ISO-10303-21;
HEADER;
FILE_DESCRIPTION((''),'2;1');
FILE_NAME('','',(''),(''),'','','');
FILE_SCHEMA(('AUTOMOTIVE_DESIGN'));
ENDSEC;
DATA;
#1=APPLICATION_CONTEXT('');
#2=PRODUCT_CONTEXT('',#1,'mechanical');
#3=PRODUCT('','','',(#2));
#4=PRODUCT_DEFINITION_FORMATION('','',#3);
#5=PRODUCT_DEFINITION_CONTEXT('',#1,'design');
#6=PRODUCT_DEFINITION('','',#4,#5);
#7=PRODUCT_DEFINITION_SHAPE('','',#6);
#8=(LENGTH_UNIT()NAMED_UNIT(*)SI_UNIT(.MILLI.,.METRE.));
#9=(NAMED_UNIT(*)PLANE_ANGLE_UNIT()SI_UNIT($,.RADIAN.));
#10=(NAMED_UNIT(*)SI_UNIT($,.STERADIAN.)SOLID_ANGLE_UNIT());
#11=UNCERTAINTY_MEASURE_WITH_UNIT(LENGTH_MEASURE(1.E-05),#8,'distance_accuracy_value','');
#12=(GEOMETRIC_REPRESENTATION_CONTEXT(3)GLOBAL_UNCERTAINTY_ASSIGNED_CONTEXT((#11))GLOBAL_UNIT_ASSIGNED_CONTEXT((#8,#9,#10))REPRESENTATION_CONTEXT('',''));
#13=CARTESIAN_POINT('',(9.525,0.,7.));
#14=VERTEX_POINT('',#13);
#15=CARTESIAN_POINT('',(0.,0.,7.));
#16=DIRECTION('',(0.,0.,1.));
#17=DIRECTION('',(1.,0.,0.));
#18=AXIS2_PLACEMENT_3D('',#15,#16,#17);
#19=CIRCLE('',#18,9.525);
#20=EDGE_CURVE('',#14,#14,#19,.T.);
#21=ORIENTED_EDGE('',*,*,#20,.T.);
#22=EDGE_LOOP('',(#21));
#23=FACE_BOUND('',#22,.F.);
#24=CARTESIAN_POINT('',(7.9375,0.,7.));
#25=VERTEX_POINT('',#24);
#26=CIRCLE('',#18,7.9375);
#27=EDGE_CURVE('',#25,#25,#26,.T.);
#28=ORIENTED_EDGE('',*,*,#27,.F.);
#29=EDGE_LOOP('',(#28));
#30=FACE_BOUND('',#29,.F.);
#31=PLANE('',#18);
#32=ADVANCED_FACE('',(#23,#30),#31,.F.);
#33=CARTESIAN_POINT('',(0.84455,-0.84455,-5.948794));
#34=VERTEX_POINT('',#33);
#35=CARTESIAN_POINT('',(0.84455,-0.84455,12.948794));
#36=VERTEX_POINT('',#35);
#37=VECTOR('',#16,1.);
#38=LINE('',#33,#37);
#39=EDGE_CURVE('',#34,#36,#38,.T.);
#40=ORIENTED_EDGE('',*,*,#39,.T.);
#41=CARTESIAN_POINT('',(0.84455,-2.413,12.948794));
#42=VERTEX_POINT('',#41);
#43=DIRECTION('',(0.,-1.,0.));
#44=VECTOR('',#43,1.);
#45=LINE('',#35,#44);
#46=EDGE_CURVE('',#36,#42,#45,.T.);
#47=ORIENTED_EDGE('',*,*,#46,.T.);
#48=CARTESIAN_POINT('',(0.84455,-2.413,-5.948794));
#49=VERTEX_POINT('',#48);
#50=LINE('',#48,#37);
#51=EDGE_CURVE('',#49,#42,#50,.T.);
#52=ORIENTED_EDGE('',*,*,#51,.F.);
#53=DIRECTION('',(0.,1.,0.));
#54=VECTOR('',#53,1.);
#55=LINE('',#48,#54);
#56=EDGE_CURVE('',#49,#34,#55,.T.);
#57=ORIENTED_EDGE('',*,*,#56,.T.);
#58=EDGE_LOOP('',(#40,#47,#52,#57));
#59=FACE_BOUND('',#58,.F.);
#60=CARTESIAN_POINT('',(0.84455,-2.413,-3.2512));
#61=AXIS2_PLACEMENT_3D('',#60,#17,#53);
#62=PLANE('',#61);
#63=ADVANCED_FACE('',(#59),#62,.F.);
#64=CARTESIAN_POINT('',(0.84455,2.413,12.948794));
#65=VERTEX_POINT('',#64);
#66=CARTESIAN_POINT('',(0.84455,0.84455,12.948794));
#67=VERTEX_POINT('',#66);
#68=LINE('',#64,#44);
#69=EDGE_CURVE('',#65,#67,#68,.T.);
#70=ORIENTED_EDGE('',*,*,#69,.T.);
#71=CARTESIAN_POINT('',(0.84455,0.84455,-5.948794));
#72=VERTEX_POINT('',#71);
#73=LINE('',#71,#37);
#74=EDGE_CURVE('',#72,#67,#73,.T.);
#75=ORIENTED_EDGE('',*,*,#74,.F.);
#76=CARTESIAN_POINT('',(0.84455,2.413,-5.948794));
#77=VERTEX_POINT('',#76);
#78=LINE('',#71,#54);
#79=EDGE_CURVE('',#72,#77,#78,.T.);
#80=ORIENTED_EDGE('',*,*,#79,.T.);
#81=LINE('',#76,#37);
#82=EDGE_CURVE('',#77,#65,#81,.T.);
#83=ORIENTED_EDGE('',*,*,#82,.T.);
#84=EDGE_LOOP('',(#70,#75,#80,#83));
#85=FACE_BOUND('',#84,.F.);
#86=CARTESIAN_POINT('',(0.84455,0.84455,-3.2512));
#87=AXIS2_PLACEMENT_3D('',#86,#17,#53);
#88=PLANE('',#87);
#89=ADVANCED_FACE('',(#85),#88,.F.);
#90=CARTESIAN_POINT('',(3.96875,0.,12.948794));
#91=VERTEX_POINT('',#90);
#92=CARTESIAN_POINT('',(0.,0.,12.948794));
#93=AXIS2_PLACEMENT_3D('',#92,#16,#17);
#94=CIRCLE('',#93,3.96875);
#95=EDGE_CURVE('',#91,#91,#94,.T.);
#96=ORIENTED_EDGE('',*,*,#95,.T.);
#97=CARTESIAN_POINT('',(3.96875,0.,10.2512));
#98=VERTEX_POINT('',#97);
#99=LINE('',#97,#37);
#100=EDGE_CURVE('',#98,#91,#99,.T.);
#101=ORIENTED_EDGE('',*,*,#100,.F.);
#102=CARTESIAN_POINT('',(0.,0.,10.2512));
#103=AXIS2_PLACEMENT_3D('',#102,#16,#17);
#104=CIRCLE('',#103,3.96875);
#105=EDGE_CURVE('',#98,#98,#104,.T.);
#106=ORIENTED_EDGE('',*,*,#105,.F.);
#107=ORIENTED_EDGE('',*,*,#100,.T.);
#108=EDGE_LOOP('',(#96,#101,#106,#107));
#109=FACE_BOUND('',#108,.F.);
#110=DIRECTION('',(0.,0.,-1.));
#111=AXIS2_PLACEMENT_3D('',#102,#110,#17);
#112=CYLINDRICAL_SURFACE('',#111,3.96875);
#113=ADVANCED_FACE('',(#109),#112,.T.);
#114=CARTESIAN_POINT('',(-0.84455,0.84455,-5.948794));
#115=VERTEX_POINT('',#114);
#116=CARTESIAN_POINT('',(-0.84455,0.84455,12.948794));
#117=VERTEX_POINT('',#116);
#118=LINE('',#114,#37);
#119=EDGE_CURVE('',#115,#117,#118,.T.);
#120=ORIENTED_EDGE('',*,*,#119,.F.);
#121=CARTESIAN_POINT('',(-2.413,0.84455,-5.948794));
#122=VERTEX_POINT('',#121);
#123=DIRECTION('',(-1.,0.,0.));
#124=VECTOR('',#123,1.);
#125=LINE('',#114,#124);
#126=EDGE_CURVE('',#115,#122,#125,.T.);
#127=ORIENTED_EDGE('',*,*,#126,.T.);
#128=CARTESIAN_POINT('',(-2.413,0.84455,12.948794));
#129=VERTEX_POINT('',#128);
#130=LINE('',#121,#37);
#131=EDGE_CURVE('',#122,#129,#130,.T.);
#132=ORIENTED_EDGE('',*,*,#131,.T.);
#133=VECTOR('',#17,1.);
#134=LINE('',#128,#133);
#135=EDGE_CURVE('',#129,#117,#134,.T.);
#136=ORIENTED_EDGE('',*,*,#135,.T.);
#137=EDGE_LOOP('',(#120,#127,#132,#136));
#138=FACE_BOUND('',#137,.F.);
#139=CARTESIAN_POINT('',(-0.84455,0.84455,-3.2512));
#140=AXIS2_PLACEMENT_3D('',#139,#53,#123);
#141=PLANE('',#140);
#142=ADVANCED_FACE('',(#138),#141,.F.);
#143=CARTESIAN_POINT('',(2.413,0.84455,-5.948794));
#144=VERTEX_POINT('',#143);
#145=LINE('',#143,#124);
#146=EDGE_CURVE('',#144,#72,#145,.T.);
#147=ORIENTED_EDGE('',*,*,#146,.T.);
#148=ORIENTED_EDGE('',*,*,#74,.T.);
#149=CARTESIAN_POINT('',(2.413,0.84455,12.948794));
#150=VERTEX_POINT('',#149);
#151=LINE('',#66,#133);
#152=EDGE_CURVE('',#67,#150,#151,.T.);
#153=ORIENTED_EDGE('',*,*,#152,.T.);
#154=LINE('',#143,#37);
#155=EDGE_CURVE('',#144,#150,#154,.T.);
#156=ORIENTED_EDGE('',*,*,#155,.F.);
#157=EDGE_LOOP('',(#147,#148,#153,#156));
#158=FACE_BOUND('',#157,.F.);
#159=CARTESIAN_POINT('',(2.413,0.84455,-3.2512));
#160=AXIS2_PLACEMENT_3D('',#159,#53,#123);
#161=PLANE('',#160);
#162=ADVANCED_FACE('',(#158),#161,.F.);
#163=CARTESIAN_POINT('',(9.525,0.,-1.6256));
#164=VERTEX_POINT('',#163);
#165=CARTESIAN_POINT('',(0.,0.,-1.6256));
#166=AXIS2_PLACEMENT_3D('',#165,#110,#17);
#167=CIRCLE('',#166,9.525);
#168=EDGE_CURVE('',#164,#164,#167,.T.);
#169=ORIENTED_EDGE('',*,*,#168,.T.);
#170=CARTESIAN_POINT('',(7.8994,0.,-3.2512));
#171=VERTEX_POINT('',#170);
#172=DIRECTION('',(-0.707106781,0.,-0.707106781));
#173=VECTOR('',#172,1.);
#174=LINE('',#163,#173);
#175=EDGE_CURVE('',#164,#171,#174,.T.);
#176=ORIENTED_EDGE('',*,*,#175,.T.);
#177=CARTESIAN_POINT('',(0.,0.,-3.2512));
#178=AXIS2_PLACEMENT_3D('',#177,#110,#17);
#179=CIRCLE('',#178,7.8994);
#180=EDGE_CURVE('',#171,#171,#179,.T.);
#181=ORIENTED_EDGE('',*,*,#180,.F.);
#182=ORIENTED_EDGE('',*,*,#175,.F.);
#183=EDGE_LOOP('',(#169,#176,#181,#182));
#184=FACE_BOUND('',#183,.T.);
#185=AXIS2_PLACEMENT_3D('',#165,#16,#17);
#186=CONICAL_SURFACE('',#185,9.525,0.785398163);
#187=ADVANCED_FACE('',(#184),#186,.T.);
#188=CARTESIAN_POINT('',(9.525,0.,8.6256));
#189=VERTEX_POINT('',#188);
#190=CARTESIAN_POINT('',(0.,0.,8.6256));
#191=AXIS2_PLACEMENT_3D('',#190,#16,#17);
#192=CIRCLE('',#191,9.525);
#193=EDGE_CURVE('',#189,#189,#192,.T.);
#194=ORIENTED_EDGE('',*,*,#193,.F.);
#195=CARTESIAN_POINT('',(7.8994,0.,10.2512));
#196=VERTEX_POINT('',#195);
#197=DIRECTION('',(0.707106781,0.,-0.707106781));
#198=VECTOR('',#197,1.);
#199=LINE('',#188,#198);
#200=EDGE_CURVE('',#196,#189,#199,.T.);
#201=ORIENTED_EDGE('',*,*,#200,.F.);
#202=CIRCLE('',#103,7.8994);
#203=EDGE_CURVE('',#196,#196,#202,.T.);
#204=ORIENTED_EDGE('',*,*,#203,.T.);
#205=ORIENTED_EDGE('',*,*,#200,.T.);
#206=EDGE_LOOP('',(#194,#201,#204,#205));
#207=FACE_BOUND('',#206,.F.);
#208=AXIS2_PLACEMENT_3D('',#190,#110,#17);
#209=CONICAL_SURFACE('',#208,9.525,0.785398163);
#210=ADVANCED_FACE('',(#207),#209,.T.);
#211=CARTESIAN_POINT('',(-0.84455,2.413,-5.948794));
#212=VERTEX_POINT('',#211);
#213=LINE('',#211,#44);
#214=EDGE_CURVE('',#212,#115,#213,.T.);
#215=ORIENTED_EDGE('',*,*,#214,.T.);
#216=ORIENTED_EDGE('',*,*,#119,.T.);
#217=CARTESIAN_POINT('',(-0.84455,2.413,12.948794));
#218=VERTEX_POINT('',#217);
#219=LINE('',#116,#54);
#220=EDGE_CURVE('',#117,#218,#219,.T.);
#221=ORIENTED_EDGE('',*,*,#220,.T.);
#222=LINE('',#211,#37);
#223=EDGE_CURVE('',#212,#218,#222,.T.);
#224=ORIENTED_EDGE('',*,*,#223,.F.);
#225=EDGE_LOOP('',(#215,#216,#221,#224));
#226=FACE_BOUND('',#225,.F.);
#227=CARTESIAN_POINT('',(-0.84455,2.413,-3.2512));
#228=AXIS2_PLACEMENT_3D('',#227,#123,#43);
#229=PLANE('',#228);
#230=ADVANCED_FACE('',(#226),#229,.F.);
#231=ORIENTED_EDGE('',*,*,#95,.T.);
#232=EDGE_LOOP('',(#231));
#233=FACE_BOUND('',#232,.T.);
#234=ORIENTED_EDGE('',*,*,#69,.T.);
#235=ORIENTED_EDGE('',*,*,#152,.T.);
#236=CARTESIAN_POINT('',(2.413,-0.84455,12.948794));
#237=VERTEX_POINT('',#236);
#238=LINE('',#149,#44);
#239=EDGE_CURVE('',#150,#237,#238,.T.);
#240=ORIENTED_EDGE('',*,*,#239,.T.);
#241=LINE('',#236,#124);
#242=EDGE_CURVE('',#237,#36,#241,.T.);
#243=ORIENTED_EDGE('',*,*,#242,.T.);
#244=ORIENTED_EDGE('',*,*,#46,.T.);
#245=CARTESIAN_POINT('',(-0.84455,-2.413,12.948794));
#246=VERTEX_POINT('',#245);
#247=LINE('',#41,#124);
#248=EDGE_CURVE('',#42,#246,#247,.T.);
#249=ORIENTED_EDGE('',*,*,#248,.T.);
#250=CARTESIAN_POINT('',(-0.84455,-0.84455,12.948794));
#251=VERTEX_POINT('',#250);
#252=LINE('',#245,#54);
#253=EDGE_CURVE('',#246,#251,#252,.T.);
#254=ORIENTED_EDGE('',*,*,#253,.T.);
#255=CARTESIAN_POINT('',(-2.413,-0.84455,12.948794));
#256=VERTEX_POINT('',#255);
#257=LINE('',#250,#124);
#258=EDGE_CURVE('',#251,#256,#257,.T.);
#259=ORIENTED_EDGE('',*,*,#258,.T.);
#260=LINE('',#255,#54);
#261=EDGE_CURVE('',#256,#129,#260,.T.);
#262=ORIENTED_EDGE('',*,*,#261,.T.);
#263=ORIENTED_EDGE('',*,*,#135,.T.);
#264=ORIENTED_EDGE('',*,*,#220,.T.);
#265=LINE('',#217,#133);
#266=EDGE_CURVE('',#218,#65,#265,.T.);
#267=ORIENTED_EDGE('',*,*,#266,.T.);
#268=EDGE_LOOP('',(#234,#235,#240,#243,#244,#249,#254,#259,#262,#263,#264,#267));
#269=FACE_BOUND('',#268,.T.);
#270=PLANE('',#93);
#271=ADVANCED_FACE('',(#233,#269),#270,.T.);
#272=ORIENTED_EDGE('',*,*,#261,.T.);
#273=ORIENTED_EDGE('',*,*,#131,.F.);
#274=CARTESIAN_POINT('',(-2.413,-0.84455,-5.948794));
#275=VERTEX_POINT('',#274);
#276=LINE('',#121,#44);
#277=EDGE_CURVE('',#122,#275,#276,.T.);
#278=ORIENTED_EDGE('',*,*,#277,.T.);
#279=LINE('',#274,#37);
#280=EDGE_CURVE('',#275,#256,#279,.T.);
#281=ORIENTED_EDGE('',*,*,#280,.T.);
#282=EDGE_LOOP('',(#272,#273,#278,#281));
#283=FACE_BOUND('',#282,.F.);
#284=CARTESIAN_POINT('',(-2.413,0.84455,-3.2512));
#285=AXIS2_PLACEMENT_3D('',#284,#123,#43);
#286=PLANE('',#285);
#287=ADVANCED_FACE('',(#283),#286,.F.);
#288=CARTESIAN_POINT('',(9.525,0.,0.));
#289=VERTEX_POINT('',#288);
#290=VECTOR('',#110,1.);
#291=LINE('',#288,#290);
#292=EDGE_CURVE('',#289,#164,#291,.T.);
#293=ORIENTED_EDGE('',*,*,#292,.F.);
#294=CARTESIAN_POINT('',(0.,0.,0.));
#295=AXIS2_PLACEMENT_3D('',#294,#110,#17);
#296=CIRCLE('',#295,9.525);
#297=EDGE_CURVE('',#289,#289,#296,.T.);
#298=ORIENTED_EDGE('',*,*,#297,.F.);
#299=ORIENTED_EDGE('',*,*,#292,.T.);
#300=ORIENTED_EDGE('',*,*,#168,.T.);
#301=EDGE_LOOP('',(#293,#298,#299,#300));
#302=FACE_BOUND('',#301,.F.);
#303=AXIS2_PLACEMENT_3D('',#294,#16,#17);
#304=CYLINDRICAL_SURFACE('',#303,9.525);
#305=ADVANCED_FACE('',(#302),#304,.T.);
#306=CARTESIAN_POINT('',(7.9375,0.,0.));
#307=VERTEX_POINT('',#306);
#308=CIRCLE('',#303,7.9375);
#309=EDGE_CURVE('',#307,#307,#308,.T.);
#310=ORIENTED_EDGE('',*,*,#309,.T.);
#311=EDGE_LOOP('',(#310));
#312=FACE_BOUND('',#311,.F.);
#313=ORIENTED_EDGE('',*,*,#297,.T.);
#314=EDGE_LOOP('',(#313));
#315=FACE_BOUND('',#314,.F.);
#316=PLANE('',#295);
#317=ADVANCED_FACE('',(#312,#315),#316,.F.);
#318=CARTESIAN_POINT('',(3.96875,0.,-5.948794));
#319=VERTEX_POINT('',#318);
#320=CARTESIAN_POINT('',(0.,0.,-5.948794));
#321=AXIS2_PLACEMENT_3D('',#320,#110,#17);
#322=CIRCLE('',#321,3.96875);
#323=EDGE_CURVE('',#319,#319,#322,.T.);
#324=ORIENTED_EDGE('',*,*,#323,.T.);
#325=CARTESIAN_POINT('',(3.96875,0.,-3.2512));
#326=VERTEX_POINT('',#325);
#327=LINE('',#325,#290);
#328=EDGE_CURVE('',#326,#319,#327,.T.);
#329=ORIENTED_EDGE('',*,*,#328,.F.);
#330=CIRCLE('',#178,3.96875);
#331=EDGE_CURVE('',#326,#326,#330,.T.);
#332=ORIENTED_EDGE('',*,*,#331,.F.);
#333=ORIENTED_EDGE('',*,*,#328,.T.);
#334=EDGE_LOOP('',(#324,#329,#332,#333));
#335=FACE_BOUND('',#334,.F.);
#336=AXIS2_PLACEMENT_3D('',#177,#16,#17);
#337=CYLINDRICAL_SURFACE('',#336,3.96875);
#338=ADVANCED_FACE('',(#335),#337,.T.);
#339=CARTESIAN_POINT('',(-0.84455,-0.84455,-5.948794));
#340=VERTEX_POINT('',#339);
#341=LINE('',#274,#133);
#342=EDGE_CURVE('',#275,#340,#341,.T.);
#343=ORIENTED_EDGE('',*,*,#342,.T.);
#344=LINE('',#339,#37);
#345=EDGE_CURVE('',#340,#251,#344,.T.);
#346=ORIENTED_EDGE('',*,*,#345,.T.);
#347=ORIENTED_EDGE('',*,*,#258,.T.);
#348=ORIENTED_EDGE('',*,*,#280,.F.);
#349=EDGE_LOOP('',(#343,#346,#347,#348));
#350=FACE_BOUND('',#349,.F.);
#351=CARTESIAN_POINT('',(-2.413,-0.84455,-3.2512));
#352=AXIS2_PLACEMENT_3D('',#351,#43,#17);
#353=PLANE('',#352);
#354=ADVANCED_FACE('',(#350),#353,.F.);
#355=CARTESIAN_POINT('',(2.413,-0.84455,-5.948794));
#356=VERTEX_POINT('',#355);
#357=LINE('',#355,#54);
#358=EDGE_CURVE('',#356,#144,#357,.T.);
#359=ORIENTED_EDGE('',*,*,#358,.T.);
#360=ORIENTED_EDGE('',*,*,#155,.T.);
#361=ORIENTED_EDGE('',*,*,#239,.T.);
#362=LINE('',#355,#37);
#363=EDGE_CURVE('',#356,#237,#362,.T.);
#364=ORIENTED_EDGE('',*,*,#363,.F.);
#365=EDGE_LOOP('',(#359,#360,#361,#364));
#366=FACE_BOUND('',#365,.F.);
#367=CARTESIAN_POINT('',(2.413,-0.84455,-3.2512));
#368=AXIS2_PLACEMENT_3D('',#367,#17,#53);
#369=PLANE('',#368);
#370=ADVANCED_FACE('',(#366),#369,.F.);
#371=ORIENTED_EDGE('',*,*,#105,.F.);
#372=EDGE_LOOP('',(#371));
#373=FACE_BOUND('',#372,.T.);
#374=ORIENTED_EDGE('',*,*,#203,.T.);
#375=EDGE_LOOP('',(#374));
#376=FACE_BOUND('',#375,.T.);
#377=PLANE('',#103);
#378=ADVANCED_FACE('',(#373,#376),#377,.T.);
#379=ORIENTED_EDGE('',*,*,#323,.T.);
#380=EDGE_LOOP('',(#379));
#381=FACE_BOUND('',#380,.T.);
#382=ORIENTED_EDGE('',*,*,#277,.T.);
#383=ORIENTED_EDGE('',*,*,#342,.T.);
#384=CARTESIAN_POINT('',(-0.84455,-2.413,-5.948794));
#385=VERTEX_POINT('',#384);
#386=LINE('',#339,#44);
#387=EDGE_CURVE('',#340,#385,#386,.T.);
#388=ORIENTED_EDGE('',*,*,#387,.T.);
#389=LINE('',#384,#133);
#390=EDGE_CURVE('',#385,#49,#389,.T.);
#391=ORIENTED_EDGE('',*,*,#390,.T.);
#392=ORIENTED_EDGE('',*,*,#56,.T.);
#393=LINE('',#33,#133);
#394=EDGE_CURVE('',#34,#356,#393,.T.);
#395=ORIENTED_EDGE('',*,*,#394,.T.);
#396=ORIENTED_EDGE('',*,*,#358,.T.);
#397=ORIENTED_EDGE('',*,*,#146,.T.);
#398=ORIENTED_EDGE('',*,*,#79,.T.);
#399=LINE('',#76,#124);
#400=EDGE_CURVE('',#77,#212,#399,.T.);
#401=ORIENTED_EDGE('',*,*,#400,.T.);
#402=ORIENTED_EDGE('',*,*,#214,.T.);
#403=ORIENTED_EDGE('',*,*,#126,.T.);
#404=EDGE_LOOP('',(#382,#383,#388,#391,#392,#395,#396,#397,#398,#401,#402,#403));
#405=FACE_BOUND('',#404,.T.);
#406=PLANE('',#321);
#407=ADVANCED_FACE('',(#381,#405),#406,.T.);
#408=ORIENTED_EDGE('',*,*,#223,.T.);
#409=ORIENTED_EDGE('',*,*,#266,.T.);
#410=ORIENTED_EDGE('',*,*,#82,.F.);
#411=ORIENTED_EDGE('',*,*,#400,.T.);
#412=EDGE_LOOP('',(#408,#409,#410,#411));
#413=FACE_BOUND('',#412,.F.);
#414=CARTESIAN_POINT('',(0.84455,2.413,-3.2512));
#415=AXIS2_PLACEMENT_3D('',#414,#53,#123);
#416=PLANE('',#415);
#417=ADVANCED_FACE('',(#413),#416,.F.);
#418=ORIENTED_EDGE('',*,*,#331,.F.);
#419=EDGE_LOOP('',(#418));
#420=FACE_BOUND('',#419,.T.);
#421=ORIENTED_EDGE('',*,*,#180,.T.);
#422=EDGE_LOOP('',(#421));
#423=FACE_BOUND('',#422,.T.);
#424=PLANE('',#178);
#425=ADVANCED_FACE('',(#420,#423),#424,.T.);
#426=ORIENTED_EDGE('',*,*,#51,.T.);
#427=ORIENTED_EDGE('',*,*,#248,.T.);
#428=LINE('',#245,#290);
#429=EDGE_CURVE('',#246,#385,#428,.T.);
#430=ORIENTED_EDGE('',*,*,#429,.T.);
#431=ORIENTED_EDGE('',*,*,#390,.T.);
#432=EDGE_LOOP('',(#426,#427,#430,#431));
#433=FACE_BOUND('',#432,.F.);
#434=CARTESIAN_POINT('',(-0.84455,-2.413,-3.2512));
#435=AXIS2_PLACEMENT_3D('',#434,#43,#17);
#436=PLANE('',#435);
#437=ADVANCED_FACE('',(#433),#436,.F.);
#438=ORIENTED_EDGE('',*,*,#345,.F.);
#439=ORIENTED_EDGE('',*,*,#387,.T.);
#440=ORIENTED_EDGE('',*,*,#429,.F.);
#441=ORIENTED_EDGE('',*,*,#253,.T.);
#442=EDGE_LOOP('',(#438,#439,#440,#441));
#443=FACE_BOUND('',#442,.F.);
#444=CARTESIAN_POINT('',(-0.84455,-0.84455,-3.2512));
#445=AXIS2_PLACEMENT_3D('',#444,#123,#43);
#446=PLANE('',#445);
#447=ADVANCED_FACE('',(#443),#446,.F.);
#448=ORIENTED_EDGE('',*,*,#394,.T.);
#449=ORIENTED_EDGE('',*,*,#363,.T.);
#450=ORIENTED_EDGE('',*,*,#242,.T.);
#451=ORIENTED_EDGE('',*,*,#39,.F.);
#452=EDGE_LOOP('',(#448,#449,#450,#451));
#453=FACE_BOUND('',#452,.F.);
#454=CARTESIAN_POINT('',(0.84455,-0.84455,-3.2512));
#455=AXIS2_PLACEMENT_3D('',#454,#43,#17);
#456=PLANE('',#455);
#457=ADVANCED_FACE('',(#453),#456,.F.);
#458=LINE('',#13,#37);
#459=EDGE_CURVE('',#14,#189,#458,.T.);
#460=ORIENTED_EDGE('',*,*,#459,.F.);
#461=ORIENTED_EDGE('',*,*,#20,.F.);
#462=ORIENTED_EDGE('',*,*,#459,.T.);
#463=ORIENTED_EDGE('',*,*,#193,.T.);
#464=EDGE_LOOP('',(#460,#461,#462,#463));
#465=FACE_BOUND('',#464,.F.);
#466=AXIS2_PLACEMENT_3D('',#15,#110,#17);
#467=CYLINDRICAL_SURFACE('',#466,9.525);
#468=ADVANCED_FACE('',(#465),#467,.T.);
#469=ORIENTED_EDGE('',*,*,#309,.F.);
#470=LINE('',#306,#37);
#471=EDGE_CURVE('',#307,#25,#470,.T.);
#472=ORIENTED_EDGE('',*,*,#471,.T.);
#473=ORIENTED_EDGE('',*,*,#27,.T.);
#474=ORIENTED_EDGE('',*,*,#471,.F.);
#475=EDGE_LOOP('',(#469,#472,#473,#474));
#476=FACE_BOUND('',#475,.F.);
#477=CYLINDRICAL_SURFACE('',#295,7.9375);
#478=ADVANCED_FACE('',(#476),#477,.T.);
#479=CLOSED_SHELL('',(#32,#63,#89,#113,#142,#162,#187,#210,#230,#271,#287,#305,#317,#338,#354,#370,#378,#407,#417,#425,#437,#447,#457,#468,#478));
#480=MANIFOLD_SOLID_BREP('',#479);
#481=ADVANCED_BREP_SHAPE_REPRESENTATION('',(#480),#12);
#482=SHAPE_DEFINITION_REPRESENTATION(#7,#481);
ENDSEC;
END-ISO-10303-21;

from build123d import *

# Parameters (mm, degrees)
F0_R      = 7.9375
F1_DEPTH  = 7
F2_R      = 9.525
F2_R_2    = 7.9375
F3_DEPTH  = 3.2512
F4_R      = 9.525
F4_R_2    = 7.9375
F5_DEPTH  = 3.2512
F6_SIZE   = 1.6256
F7_R      = 3.96875
F8_DEPTH  = 2.6975943
F9_R      = 3.96875
F10_DEPTH = 2.6975943


with BuildPart() as f1:
    # F0 (on Top) → F1 (new body)
    with BuildSketch(Plane.XY):
        Circle(F0_R)
        Polygon((0.84455, 0.84455), (2.413, 0.84455), (2.413, -0.84455), (0.84455, -0.84455), (0.84455, -2.413), (-0.84455, -2.413), (-0.84455, -0.84455), (-2.413, -0.84455), (-2.413, 0.84455), (-0.84455, 0.84455), (-0.84455, 2.413), (0.84455, 2.413), align=None, mode=Mode.SUBTRACT)
    extrude(amount=F1_DEPTH)

    # F2 (on face) → F3 (join)
    with BuildSketch(Plane.XY.offset(7)):
        Circle(F2_R)
        Circle(F2_R_2, mode=Mode.SUBTRACT)
        Circle(F2_R_2)
        Polygon((0.84455, 2.413), (0.84455, 0.84455), (2.413, 0.84455), (2.413, -0.84455), (0.84455, -0.84455), (0.84455, -2.413), (-0.84455, -2.413), (-0.84455, -0.84455), (-2.413, -0.84455), (-2.413, 0.84455), (-0.84455, 0.84455), (-0.84455, 2.413), align=None, mode=Mode.SUBTRACT)
    extrude(amount=F3_DEPTH)

    # F4 (on face) → F5 (join)
    with BuildSketch(Plane(origin=(0, 0, 0), x_dir=(1, 0, 0), z_dir=(0, 0, -1))):
        Circle(F4_R)
        Circle(F4_R_2, mode=Mode.SUBTRACT)
        Circle(F4_R_2)
        Polygon((2.413, 0.84455), (2.413, -0.84455), (0.84455, -0.84455), (0.84455, -2.413), (-0.84455, -2.413), (-0.84455, -0.84455), (-2.413, -0.84455), (-2.413, 0.84455), (-0.84455, 0.84455), (-0.84455, 2.413), (0.84455, 2.413), (0.84455, 0.84455), align=None, mode=Mode.SUBTRACT)
    extrude(amount=F5_DEPTH)

    # F6
    f6_edges = [f1.edges().sort_by_distance(p)[0] for p in [
        (-9.525, 0, 10.2512),
        (-9.525, 0, -3.2512),
    ]]
    chamfer(f6_edges, length=F6_SIZE)

    # F7 (on face) → F8 (join)
    with BuildSketch(Plane.XY.offset(10.2512)):
        Circle(F7_R)
        Polygon((-2.413, -0.84455), (-2.413, 0.84455), (-0.84455, 0.84455), (-0.84455, 2.413), (0.84455, 2.413), (0.84455, 0.84455), (2.413, 0.84455), (2.413, -0.84455), (0.84455, -0.84455), (0.84455, -2.413), (-0.84455, -2.413), (-0.84455, -0.84455), align=None, mode=Mode.SUBTRACT)
    extrude(amount=F8_DEPTH)

    # F9 (on face) → F10 (join)
    with BuildSketch(Plane(origin=(0, 0, -3.2512), x_dir=(1, 0, 0), z_dir=(0, 0, -1))):
        Circle(F9_R)
        Polygon((-0.84455, 2.413), (0.84455, 2.413), (0.84455, 0.84455), (2.413, 0.84455), (2.413, -0.84455), (0.84455, -0.84455), (0.84455, -2.413), (-0.84455, -2.413), (-0.84455, -0.84455), (-2.413, -0.84455), (-2.413, 0.84455), (-0.84455, 0.84455), align=None, mode=Mode.SUBTRACT)
    extrude(amount=F10_DEPTH)


solid = f1.part
